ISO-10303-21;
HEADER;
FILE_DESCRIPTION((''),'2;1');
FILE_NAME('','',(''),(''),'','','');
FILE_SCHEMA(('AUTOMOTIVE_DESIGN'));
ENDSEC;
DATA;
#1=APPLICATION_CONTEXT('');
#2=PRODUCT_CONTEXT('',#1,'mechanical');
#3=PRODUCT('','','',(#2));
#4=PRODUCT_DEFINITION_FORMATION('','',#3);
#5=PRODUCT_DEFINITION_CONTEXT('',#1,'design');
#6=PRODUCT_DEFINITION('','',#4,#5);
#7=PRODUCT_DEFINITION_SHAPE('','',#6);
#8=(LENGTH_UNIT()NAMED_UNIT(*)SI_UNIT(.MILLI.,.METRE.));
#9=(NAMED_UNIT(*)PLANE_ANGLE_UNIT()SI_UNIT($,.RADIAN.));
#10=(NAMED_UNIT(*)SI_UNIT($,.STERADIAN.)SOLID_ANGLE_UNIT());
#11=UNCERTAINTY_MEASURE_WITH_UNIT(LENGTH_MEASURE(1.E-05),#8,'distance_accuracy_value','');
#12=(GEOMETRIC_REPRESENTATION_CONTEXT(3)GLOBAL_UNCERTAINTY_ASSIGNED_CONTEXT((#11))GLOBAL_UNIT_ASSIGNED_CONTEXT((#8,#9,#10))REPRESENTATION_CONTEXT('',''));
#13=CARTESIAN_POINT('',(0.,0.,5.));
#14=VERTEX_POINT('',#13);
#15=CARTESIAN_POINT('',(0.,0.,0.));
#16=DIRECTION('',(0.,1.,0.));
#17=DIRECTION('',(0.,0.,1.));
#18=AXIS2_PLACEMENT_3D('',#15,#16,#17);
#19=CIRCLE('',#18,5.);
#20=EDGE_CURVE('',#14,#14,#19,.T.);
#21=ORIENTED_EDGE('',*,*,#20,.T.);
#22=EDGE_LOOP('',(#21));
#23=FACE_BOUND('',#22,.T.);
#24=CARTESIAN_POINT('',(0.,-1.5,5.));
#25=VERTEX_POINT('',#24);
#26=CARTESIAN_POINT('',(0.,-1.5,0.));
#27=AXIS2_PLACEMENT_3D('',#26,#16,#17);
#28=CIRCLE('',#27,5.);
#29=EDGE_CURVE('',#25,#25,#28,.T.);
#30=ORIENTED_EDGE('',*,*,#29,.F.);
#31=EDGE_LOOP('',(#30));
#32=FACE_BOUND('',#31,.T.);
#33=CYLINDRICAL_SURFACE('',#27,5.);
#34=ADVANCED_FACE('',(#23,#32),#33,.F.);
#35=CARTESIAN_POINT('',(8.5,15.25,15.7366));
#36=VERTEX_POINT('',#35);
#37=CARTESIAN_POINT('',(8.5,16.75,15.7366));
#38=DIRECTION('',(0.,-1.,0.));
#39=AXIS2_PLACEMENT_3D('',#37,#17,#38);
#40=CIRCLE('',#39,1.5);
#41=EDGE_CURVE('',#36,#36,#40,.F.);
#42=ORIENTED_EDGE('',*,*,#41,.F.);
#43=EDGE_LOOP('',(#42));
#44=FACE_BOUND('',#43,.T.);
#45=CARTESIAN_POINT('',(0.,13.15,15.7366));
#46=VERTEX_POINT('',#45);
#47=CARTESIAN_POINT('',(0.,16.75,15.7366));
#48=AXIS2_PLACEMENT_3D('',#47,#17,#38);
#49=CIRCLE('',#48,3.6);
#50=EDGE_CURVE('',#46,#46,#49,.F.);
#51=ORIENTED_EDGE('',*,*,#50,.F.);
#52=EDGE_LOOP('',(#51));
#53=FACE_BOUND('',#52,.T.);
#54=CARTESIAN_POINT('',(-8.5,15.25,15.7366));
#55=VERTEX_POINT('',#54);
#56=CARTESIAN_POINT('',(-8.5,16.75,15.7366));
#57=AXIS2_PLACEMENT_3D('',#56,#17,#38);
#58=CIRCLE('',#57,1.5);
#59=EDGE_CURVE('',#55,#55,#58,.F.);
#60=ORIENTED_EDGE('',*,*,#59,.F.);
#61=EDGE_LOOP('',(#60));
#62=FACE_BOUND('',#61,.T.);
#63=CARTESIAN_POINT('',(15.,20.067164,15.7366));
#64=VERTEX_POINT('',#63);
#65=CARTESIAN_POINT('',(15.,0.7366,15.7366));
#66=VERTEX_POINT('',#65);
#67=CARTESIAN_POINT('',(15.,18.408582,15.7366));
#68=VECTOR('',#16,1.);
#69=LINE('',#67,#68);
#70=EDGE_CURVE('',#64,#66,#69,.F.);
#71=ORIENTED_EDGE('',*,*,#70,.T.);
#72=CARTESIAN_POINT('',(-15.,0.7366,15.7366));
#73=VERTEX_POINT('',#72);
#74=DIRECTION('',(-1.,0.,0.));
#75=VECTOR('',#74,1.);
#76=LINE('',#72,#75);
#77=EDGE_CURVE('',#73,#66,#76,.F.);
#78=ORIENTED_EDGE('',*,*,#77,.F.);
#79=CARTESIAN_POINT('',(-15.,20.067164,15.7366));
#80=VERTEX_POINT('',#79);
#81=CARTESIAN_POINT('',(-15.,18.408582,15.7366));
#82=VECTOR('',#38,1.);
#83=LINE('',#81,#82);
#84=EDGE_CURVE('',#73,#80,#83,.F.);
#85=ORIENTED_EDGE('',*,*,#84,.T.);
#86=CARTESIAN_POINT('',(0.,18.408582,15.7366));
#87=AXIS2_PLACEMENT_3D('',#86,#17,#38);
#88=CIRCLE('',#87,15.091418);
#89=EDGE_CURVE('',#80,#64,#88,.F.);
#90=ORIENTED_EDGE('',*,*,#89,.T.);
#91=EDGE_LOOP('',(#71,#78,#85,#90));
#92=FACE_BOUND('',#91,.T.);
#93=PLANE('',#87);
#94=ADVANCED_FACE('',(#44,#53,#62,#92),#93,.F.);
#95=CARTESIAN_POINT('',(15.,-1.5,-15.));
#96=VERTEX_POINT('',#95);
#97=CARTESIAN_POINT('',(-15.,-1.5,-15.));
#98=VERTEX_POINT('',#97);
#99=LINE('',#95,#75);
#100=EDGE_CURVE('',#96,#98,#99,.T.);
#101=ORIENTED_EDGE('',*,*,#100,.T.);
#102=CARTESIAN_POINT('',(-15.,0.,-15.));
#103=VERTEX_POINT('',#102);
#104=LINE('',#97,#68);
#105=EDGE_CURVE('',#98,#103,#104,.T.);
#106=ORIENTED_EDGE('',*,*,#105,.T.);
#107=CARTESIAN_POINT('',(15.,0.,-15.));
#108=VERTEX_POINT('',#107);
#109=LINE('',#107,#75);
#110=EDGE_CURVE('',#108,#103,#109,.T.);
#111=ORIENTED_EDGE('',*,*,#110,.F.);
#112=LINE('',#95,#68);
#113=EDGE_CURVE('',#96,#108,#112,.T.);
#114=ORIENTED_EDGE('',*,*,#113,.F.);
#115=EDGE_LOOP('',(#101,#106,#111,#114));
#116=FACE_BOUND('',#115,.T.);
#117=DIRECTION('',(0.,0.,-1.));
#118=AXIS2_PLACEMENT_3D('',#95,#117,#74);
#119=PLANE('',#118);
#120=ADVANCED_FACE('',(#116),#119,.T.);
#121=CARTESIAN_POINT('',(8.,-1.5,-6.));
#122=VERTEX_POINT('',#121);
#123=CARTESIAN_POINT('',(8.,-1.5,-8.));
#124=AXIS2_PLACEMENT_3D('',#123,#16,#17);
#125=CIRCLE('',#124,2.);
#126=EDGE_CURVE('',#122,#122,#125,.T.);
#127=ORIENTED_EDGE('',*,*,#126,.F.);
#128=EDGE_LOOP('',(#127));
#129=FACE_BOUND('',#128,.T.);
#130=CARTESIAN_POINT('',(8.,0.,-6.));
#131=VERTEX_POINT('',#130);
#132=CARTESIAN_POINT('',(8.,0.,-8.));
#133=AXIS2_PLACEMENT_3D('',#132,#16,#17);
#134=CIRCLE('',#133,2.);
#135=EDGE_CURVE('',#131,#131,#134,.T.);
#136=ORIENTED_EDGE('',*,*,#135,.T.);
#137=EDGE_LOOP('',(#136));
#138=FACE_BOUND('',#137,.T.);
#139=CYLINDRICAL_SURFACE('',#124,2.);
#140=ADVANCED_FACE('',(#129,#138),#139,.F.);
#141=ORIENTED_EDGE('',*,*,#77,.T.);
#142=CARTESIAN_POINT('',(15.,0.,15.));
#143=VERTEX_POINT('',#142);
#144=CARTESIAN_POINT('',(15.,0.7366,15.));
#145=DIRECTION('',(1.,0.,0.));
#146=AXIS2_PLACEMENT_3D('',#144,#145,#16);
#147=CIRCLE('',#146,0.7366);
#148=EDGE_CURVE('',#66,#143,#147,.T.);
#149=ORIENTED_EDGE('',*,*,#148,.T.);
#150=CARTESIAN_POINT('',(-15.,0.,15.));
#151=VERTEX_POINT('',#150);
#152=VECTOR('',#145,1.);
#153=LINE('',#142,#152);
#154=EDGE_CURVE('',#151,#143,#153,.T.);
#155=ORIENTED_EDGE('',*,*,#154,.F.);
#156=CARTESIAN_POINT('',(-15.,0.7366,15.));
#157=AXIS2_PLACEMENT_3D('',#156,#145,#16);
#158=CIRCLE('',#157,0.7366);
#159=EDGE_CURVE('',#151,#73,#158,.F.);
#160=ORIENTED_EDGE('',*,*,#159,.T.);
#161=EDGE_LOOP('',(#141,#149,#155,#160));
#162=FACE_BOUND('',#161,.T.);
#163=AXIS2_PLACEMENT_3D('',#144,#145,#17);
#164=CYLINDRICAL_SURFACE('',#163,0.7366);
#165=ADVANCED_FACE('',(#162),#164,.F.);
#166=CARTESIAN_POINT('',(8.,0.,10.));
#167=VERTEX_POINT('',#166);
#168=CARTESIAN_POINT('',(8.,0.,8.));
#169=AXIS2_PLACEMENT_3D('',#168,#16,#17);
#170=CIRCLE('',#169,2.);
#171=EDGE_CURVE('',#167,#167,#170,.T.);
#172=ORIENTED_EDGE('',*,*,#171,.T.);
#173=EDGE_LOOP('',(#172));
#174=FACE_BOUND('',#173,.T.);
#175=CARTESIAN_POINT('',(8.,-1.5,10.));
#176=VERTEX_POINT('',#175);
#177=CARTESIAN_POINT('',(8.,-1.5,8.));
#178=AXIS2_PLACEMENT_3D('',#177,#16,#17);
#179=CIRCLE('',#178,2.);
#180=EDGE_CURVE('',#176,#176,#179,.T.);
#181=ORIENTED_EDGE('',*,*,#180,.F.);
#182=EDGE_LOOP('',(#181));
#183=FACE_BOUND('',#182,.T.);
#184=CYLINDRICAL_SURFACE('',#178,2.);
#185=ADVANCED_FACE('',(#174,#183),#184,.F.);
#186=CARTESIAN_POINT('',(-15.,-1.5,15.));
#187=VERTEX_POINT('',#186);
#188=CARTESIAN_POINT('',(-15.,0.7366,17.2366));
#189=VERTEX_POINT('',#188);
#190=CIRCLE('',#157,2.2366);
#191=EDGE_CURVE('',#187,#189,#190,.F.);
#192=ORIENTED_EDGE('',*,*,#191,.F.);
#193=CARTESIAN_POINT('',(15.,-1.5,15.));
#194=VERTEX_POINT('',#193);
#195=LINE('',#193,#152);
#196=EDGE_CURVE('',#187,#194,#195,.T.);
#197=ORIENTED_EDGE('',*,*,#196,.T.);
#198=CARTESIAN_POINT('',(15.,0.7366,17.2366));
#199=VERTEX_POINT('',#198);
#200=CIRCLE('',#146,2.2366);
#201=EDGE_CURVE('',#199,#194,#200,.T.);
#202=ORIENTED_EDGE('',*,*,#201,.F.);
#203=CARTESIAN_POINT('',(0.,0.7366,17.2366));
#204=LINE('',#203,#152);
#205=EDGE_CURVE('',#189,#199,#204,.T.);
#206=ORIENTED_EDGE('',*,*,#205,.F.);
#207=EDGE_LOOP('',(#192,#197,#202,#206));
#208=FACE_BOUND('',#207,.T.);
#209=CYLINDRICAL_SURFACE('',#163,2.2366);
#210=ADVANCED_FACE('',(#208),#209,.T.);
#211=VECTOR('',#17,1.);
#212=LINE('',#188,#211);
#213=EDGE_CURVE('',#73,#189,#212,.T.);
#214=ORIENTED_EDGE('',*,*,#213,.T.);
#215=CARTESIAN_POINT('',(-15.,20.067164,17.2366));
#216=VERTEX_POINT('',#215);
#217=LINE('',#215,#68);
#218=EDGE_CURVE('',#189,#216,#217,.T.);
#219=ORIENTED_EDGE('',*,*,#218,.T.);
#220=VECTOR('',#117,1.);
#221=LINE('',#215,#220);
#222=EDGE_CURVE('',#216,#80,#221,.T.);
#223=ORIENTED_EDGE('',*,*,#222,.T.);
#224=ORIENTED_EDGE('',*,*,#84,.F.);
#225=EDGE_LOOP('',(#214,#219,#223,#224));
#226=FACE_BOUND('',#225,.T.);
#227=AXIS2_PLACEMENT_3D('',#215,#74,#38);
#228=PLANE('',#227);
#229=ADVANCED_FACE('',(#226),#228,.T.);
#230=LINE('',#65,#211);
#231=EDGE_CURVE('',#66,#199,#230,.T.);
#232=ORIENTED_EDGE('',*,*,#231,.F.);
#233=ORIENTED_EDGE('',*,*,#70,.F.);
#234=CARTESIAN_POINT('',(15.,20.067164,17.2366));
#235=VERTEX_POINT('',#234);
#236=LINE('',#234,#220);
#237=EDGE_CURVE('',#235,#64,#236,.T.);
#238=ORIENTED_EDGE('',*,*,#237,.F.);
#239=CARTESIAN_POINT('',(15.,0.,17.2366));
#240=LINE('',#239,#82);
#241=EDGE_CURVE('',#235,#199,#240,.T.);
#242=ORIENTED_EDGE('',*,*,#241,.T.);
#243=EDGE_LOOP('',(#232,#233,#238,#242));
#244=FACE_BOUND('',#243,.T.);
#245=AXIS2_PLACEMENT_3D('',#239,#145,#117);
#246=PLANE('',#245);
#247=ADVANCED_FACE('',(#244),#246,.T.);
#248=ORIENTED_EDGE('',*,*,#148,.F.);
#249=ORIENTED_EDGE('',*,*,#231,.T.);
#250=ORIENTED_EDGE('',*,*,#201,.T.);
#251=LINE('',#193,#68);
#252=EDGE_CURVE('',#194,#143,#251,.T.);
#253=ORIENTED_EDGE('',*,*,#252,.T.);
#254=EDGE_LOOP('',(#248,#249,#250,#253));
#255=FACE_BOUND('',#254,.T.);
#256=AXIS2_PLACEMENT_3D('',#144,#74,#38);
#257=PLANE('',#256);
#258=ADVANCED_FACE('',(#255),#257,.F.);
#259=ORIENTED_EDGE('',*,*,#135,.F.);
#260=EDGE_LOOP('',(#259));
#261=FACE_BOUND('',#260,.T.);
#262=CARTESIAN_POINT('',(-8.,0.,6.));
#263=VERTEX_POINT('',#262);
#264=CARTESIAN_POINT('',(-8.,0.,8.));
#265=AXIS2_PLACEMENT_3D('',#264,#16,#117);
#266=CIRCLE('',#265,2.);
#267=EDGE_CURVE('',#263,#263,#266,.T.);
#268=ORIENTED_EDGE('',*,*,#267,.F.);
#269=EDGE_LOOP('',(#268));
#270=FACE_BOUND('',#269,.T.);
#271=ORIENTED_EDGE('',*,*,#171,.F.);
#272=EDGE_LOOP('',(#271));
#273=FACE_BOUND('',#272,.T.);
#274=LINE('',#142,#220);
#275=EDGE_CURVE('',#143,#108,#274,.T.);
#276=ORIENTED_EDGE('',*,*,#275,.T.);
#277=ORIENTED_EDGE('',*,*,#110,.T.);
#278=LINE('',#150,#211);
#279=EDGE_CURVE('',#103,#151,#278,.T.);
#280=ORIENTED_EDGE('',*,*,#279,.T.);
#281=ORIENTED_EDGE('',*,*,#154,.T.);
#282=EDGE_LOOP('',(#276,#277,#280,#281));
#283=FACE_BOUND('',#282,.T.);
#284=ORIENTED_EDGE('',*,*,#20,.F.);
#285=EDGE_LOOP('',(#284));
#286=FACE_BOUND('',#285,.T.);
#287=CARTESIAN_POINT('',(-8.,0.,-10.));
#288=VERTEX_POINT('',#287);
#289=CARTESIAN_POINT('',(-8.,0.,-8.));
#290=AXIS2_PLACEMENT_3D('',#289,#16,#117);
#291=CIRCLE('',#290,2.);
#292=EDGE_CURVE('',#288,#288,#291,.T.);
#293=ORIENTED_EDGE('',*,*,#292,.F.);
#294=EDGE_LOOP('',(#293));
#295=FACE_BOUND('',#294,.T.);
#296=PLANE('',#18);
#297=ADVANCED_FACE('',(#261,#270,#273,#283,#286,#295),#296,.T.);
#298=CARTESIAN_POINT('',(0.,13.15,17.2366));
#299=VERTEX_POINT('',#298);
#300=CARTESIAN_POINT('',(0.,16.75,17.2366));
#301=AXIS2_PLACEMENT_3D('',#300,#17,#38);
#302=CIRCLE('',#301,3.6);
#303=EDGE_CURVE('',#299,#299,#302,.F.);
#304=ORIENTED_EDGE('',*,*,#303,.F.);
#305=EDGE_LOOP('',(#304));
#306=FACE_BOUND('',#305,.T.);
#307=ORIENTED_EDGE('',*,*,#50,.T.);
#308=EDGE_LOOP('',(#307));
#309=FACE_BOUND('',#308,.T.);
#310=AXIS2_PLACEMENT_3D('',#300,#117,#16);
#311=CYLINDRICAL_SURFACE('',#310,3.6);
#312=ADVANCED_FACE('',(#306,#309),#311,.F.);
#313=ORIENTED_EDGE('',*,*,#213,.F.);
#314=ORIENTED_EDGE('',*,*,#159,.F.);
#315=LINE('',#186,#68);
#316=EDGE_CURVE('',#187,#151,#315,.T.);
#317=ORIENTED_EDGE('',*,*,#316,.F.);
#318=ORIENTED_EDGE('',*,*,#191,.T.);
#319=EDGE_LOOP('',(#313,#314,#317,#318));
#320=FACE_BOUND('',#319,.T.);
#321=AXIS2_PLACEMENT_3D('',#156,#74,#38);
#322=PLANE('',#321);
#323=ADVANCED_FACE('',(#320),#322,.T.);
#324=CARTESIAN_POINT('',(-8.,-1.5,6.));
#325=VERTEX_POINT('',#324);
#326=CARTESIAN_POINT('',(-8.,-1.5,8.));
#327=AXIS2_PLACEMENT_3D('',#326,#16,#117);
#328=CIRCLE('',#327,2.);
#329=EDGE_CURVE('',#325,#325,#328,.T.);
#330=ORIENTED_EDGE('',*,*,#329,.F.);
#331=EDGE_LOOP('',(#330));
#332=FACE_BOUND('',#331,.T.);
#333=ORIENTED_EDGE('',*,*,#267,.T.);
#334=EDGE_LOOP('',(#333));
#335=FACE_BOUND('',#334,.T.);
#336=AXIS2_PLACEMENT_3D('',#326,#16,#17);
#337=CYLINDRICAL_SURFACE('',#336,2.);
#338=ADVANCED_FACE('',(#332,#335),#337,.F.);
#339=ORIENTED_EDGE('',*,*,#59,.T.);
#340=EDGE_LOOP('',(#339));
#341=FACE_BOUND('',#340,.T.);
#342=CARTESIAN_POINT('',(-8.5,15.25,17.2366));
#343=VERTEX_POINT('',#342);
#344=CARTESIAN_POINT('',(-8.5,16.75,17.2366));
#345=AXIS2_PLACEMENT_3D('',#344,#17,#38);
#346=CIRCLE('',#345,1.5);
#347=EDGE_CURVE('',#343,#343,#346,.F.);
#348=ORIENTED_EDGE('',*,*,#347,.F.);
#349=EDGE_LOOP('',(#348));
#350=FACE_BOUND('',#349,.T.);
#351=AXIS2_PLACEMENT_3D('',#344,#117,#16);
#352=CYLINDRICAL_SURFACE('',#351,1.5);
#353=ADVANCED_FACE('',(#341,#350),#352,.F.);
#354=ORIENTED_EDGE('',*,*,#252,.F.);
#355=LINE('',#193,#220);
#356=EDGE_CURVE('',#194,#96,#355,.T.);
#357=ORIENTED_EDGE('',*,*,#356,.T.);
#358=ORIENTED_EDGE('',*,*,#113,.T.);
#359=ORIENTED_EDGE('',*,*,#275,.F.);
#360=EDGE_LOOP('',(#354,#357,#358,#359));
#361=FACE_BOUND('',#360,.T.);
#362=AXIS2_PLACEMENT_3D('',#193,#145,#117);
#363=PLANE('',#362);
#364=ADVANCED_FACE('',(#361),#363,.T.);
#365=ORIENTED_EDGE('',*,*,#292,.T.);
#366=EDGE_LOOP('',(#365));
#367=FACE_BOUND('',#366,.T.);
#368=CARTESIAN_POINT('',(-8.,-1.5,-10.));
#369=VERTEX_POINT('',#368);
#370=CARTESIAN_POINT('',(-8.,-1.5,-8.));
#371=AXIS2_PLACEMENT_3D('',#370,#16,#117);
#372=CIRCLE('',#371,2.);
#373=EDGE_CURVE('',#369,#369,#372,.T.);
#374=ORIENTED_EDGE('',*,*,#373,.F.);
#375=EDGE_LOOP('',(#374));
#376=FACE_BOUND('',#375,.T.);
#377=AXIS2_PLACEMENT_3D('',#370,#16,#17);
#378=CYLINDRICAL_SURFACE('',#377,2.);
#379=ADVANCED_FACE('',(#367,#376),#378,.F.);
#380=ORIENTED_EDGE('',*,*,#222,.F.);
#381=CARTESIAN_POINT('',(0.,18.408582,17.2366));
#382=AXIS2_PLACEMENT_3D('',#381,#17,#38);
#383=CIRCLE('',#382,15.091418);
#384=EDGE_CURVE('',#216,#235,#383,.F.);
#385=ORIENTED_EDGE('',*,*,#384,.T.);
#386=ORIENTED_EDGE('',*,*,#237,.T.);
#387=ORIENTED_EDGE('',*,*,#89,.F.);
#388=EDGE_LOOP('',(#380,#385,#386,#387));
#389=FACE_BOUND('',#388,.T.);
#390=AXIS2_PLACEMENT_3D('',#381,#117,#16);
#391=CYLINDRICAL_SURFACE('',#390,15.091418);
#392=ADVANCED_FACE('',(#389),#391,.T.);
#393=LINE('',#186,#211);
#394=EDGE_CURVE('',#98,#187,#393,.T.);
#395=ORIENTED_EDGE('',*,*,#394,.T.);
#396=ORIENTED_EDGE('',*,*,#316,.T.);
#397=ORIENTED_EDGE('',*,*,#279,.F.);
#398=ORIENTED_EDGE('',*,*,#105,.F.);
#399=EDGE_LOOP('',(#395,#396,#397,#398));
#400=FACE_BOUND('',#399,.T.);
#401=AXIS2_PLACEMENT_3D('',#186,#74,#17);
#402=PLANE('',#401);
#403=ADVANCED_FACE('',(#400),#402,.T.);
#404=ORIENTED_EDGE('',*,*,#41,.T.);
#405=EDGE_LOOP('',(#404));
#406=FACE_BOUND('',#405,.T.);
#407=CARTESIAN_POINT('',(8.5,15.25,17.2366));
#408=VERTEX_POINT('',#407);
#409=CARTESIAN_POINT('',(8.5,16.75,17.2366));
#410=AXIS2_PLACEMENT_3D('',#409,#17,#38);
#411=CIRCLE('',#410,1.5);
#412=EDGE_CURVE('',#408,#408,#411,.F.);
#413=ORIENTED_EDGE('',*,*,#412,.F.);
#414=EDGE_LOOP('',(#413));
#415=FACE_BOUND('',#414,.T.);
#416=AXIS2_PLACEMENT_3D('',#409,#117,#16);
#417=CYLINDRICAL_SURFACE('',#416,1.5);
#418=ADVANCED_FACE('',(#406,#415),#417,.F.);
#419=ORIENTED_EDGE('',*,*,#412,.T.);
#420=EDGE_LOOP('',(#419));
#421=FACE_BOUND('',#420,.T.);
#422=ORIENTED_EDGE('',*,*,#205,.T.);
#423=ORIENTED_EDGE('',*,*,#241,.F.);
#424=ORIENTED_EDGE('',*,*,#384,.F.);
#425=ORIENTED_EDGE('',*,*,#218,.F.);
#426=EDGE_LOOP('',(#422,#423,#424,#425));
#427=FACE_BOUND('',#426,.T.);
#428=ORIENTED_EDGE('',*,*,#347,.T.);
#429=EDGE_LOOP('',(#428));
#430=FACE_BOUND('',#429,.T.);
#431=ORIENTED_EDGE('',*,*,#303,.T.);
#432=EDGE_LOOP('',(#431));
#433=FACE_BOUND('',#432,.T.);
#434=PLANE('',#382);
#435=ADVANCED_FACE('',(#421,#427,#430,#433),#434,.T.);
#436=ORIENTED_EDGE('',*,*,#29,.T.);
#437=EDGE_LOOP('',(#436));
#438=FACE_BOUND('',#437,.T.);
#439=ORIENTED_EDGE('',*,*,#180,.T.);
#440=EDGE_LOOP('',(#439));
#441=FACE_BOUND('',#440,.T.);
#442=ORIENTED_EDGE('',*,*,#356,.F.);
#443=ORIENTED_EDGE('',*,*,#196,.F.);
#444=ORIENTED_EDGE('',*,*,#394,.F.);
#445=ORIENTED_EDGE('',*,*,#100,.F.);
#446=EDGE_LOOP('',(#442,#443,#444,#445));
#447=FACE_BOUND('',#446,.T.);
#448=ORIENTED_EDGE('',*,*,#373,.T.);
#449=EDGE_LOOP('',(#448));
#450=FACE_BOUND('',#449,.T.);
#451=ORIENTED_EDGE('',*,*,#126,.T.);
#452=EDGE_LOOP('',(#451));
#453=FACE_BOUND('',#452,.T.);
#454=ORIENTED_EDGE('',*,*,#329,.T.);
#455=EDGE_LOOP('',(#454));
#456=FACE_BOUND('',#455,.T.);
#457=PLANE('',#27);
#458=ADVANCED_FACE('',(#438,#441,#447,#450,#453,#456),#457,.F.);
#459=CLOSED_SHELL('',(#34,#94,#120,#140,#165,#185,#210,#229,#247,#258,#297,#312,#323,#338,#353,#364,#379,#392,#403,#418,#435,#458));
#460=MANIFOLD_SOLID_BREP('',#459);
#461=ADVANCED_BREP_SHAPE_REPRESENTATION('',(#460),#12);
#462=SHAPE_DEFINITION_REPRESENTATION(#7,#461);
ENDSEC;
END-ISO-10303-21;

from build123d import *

# Parameters (mm, degrees)
SKETCH1_W                = 30
SKETCH1_H                = 30
SKETCH1_R                = 5
SKETCH1_R_2              = 2
BASE_FLANGE1_DEPTH       = 1.5
EDGE_FLANGE1_DEPTH       = 30
EDGE_FLANGE1_START       = -1.5
EDGE_FLANGE1_PROFILE_R   = 1.5
EDGE_FLANGE1_PROFILE_R_2 = 3.6
EDGE_FLANGE1_FLAT_DEPTH  = 1.5


# Sheet-metal steps are written as plain solids
with BuildPart() as part:
    # Sketch1 → Base-Flange1 (new body)
    with BuildSketch(Plane(origin=(0, 0, 0), x_dir=(1, 0, 0), z_dir=(0, 1, 0))):
        Rectangle(SKETCH1_W, SKETCH1_H)
        with Locations(Location((0, 0, 0), (0, 0, 270))):
            Circle(SKETCH1_R, mode=Mode.SUBTRACT)
        with Locations(Location((8, 8, 0), (0, 0, 270))):
            Circle(SKETCH1_R_2, mode=Mode.SUBTRACT)
        with Locations(Location((8, -8, 0), (0, 0, 270))):
            Circle(SKETCH1_R_2, mode=Mode.SUBTRACT)
        with Locations(Location((-8, -8, 0), (0, 0, 90))):
            Circle(SKETCH1_R_2, mode=Mode.SUBTRACT)
        with Locations(Location((-8, 8, 0), (0, 0, 90))):
            Circle(SKETCH1_R_2, mode=Mode.SUBTRACT)
    extrude(amount=-BASE_FLANGE1_DEPTH)

    # Edge-Flange1 bend section (across the edge) → Edge-Flange1 (add)
    with BuildSketch(Plane(origin=(-15, 0, 15.7366), x_dir=(0, 0, -1), z_dir=(1, 0, 0))):
        with BuildLine():
            Line((-1.5, 0.7366), (0, 0.7366))
            ThreePointArc((0, 0.7366), (0.215745145, 0.215745145), (0.7366, 0))
            Line((0.7366, 0), (0.7366, -1.5))
            ThreePointArc((0.7366, -1.5), (-0.844915027, -0.844915027), (-1.5, 0.7366))
        make_face()
    extrude(amount=EDGE_FLANGE1_DEPTH)

    # Edge-Flange1 profile (on flange) → Edge-Flange1 flat (add)
    with BuildSketch(Plane(origin=(0, 0, 15.7366), x_dir=(-1, 0, 0), z_dir=(0, 0, -1)).offset(EDGE_FLANGE1_START)):
        with BuildLine():
            ThreePointArc((15, 20.067164179), (0, 33.5), (-15, 20.067164179))
            Line((-15, 20.067164179), (-15, 0.7366))
            Line((-15, 0.7366), (15, 0.7366))
            Line((15, 0.7366), (15, 20.067164179))
        make_face()
        with Locations((8.5, 16.75)):
            Circle(EDGE_FLANGE1_PROFILE_R, mode=Mode.SUBTRACT)
        with Locations((0, 16.75)):
            Circle(EDGE_FLANGE1_PROFILE_R_2, mode=Mode.SUBTRACT)
        with Locations((-8.5, 16.75)):
            Circle(EDGE_FLANGE1_PROFILE_R, mode=Mode.SUBTRACT)
    extrude(amount=EDGE_FLANGE1_FLAT_DEPTH)


solid = part.part
